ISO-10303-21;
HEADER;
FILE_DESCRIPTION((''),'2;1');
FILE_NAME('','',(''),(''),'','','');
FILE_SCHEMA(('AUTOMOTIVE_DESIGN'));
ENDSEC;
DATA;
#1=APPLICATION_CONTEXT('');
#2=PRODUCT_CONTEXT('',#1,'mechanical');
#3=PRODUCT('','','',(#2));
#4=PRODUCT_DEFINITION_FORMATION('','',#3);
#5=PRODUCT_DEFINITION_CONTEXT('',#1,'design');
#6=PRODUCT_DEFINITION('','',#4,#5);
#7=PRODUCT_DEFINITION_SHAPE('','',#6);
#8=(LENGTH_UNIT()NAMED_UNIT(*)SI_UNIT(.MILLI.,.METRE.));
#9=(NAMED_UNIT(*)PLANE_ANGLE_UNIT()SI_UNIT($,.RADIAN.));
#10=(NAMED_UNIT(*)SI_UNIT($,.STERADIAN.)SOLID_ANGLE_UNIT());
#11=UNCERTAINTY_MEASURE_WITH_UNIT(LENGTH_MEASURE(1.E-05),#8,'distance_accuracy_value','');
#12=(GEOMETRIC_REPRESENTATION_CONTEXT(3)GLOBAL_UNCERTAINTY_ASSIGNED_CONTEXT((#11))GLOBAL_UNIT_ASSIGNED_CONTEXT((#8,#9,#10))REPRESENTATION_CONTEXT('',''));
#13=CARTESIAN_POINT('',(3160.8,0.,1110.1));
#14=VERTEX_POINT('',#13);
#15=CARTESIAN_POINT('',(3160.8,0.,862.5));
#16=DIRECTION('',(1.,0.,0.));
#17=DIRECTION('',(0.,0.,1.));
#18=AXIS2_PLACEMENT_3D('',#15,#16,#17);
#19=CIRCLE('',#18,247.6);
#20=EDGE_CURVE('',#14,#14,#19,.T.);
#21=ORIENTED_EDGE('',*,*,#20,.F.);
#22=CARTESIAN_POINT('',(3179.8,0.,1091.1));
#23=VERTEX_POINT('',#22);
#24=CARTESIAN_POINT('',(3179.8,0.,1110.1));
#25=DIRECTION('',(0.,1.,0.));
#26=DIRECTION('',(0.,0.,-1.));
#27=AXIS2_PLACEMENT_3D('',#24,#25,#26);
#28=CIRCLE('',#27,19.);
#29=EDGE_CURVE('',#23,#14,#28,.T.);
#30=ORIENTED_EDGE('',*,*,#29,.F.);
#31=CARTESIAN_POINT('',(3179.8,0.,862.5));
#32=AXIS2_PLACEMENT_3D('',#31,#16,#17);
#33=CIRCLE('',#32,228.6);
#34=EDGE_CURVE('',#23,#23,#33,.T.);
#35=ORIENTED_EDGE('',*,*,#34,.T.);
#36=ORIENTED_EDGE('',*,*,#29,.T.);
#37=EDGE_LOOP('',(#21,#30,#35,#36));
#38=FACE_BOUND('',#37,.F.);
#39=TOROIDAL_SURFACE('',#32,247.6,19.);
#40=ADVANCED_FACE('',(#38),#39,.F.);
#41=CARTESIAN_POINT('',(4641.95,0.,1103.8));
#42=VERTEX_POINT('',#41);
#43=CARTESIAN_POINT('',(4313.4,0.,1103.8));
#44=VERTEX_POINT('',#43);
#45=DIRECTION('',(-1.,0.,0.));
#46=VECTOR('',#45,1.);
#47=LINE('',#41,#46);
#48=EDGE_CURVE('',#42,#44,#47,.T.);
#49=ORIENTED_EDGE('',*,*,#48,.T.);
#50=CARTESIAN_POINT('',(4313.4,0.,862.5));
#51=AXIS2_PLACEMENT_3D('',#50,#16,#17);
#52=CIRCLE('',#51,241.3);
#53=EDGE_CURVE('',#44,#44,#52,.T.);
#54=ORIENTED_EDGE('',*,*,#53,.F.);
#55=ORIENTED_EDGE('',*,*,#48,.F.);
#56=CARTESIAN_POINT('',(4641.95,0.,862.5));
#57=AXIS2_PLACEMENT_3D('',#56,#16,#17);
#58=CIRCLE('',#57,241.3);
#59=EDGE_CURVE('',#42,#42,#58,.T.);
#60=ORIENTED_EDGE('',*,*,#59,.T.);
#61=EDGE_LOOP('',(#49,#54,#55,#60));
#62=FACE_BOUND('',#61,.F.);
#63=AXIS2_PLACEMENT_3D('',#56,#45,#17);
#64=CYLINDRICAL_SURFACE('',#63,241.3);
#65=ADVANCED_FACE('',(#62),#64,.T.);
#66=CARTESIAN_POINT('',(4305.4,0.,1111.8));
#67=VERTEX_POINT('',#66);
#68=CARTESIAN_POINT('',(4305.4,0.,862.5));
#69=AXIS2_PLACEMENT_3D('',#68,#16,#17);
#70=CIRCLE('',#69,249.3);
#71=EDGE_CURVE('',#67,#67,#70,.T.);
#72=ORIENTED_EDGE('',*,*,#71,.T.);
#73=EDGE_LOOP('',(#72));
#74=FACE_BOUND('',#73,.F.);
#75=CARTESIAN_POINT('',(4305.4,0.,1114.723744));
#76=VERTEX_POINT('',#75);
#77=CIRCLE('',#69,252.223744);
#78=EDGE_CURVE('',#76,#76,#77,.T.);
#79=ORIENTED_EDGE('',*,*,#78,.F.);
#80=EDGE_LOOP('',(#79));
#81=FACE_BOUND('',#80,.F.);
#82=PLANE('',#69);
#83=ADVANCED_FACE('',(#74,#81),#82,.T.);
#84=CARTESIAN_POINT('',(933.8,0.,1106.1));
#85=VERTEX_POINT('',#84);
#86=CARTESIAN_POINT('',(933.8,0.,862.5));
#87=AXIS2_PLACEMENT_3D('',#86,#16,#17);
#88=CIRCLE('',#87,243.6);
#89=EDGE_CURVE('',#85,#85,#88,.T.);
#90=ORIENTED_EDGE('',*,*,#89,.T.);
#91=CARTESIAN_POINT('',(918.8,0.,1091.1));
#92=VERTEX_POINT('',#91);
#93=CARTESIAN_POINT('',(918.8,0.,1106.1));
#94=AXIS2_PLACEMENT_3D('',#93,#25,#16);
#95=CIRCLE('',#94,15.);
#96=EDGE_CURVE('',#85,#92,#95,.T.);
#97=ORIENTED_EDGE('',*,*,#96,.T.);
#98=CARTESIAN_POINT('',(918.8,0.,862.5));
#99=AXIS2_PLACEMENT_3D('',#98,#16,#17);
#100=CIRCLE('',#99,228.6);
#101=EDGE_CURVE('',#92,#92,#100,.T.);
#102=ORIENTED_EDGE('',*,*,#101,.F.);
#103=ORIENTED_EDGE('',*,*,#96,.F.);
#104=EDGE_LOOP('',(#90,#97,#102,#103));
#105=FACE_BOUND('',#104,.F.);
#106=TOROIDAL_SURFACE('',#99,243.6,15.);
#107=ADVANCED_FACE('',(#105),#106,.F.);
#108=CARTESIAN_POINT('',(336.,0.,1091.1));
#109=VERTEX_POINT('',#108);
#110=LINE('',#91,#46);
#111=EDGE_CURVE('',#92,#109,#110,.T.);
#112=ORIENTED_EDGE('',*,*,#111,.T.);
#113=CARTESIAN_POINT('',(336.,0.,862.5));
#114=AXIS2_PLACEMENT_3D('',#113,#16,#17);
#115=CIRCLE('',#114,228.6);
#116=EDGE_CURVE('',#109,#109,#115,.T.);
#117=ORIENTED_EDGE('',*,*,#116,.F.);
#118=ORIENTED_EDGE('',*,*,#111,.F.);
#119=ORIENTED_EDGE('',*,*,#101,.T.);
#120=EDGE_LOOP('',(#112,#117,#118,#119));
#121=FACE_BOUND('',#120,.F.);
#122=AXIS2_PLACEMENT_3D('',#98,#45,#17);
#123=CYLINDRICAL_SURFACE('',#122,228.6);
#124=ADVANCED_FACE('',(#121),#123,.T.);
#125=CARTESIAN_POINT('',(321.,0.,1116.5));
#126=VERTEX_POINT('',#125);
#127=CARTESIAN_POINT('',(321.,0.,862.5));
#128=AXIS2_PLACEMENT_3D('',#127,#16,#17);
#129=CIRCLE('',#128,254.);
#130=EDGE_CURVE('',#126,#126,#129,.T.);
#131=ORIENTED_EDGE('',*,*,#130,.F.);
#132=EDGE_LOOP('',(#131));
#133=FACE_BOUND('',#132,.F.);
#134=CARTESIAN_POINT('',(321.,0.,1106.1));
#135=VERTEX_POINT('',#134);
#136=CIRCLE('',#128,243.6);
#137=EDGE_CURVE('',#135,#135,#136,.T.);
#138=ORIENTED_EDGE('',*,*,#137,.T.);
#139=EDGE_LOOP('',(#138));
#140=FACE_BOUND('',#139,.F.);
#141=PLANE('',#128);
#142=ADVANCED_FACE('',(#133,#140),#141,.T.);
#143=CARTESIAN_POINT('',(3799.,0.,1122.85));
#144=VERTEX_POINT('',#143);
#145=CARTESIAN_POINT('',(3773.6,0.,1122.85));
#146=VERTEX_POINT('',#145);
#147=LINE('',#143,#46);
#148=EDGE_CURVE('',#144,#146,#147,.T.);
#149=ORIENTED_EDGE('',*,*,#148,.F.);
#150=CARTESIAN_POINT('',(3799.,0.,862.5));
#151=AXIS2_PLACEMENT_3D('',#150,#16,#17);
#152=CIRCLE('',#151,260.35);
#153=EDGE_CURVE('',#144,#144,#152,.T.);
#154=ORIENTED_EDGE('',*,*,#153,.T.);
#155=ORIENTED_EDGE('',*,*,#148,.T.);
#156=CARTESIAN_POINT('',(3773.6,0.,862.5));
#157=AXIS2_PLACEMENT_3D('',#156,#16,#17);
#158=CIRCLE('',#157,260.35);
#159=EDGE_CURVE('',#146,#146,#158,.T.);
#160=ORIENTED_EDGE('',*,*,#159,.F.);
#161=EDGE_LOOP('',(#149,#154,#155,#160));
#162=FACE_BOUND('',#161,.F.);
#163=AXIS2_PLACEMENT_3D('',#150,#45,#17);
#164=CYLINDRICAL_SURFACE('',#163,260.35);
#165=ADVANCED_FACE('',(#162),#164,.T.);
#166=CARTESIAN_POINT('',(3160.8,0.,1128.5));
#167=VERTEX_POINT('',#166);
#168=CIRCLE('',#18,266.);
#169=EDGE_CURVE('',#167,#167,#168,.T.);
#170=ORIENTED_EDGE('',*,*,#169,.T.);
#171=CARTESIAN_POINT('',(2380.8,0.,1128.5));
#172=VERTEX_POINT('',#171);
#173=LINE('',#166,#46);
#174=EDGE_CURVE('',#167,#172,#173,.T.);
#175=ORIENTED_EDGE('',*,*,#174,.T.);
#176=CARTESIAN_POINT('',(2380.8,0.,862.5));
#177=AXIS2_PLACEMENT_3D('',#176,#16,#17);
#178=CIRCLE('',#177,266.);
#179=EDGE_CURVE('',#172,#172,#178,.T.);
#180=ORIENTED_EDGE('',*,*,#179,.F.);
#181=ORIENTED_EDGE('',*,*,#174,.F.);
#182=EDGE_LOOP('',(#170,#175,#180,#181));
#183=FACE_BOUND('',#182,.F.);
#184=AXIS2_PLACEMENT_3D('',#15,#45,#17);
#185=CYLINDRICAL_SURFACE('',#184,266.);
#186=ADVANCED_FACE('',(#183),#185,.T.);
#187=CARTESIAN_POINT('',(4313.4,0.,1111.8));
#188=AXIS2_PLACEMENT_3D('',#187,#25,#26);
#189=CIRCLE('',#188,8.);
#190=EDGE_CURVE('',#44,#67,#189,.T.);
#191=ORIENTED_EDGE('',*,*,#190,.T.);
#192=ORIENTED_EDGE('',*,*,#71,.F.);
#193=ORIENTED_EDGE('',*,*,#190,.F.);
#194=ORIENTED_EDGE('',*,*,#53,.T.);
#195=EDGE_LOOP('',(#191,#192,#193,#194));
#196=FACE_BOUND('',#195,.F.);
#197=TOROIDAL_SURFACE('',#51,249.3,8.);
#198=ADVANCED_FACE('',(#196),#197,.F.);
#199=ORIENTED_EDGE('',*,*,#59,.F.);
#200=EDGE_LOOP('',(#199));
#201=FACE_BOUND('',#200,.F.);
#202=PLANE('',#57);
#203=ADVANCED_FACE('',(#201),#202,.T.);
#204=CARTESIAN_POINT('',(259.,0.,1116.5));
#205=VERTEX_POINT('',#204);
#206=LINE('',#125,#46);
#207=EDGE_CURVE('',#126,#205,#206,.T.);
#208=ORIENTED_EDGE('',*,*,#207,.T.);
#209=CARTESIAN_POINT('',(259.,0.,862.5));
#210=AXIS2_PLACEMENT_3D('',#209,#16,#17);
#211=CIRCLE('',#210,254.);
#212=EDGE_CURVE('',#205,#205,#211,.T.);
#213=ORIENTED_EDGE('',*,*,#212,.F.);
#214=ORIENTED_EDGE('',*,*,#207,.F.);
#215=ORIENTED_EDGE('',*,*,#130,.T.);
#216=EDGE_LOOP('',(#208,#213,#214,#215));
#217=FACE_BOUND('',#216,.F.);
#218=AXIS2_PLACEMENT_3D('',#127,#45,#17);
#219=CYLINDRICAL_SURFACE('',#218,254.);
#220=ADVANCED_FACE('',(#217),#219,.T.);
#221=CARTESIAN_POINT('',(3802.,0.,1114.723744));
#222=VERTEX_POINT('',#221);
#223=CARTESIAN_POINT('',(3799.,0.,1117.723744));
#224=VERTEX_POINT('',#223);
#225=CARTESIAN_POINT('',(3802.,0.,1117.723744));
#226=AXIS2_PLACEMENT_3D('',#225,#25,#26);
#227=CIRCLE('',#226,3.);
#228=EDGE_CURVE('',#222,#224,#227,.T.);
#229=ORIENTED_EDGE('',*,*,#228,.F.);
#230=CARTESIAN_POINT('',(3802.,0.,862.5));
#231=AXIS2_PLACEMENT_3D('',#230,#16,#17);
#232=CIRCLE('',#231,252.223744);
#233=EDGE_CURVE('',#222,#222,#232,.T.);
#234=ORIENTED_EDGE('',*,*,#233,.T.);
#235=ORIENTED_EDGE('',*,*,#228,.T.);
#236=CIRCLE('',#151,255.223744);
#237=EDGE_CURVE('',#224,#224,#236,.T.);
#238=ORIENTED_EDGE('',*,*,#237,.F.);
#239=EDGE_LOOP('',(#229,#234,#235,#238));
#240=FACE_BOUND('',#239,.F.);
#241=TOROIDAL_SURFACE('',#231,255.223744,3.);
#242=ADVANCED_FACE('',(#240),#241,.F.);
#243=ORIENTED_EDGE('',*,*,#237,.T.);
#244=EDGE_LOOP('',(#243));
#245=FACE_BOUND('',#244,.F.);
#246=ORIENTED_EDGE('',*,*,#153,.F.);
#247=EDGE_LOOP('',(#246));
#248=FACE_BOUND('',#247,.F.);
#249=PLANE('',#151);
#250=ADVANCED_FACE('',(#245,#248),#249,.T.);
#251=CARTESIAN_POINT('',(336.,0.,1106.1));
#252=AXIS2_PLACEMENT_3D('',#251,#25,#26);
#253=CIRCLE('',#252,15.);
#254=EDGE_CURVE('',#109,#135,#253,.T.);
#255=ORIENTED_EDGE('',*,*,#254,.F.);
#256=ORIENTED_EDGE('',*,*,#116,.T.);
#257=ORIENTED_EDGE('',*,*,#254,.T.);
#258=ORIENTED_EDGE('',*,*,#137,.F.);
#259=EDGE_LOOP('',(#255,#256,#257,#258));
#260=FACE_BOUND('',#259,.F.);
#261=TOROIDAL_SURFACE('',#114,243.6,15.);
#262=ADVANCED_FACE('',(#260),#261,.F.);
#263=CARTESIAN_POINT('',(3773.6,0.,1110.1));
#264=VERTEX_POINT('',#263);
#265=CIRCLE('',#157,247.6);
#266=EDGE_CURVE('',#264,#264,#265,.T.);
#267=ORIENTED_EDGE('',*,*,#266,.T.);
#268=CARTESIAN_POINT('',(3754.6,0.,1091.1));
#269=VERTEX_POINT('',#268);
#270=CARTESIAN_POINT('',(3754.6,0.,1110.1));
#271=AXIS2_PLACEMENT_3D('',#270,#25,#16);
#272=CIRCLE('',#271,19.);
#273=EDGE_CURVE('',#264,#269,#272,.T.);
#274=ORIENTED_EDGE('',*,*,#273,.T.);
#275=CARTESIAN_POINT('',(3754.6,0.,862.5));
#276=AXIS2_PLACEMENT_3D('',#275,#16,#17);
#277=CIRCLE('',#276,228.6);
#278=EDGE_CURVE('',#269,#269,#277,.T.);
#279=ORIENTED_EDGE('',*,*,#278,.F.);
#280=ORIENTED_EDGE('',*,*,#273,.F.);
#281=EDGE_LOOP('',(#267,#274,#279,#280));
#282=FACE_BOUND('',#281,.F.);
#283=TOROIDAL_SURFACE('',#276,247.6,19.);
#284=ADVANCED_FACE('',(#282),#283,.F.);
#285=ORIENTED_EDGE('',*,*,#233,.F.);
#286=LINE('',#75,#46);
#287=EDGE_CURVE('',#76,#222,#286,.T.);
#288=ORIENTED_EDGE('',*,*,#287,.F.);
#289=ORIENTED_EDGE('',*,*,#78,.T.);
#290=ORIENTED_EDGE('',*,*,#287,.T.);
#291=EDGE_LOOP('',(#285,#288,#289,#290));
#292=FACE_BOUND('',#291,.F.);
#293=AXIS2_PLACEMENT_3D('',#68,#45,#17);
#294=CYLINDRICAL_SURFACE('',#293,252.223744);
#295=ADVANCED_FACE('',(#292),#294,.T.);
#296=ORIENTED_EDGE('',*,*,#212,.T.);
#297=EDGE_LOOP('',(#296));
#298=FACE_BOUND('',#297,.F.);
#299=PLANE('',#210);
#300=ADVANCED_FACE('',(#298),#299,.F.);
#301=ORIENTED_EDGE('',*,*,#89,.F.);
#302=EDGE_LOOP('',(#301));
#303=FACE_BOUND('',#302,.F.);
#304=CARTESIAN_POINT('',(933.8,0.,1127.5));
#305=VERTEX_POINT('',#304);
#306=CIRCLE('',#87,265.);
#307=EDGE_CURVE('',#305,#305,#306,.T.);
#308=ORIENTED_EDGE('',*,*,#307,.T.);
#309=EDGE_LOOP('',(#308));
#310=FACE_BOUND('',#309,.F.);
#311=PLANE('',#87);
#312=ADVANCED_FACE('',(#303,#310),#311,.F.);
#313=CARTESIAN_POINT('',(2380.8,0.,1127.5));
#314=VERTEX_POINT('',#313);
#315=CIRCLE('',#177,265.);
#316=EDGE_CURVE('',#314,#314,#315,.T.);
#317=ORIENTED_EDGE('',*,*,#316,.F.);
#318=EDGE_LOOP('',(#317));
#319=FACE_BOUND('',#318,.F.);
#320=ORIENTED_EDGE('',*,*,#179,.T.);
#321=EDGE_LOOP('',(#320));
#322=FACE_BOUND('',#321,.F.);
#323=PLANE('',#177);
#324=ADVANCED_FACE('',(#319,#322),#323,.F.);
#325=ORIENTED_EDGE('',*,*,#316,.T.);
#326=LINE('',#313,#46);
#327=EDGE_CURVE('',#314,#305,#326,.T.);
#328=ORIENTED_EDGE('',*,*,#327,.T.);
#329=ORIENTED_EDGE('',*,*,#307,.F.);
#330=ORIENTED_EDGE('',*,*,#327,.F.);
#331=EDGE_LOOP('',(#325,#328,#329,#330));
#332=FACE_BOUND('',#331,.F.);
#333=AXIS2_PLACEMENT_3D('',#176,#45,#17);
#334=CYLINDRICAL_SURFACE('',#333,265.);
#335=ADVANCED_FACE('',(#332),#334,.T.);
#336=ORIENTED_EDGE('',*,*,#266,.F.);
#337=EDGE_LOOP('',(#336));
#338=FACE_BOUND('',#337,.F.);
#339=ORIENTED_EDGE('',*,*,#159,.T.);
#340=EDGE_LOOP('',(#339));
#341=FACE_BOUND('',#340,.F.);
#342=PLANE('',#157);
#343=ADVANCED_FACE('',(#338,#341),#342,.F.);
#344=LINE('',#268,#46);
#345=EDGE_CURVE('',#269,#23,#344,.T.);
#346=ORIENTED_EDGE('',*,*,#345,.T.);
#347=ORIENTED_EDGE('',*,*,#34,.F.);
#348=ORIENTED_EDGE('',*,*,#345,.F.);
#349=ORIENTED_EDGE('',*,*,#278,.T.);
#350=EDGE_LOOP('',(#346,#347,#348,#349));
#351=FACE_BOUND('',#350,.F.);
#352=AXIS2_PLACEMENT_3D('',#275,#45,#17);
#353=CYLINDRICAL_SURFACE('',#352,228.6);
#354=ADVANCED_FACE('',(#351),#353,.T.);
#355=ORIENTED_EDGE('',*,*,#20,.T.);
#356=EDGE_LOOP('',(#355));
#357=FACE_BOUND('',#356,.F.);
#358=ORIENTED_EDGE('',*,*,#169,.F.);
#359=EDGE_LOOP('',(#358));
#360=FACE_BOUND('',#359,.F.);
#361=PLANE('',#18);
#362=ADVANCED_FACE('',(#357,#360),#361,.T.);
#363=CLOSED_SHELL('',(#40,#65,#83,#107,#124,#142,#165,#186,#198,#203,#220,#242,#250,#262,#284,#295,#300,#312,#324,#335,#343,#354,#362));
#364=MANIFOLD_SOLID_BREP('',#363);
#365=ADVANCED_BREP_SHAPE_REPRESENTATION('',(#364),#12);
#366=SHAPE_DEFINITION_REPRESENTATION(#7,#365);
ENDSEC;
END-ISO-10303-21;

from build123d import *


# Not quite as in the source:
# - a feature names something its author has since deleted; it is built from what else it names


with BuildPart() as f1:
    # F0 (on Front) → F1 (revolve)
    with BuildSketch(Plane.XZ):
        Polygon((259, 254), (259, 0), (321, 0), (321, 243.6), (321, 254), align=None)
        Polygon((933.8, 243.6), (933.8, 0), (2380.8, 0), (2380.8, 261), (2380.8, 265), (933.8, 265), align=None)
        Polygon((2380.8, 261), (2380.8, 0), (3160.8, 0), (3160.8, 247.6), (3160.8, 266), (2380.8, 266), (2380.8, 265), align=None)
        with BuildLine():
            Line((3160.8, 247.6), (3160.8, 0))
            Line((3160.8, 0), (3773.6, 0))
            Line((3773.6, 0), (3773.6, 247.6))
            ThreePointArc((3773.6, 247.6), (3768.0350288425, 234.1649711575), (3754.6, 228.6))
            Line((3754.6, 228.6), (3179.8, 228.6))
            ThreePointArc((3179.8, 228.6), (3166.3649711575, 234.1649711575), (3160.8, 247.6))
        make_face()
        with BuildLine():
            Line((3799, 255.2237437367), (3799, 0))
            Line((3799, 0), (4305.4, 0))
            Line((4305.4, 0), (4305.4, 249.3))
            Line((4305.4, 249.3), (4305.4, 252.2237437367))
            Line((4305.4, 252.2237437367), (3802, 252.2237437367))
            ThreePointArc((3802, 252.2237437367), (3799.8786796564, 253.1024233932), (3799, 255.2237437367))
        make_face()
        Polygon((3773.6, 247.6), (3773.6, 0), (3799, 0), (3799, 255.2237437367), (3799, 260.35), (3773.6, 260.35), align=None)
        with BuildLine():
            Line((4305.4, 249.3), (4305.4, 0))
            Line((4305.4, 0), (4641.95, 0))
            Line((4641.95, 0), (4641.95, 241.3))
            Line((4641.95, 241.3), (4313.4, 241.3))
            ThreePointArc((4313.4, 241.3), (4307.7431457505, 243.6431457505), (4305.4, 249.3))
        make_face()
        with BuildLine():
            Line((321, 243.6), (321, 0))
            Line((321, 0), (933.8, 0))
            Line((933.8, 0), (933.8, 243.6))
            ThreePointArc((933.8, 243.6), (929.4066017178, 232.9933982822), (918.8, 228.6))
            Line((918.8, 228.6), (336, 228.6))
            ThreePointArc((336, 228.6), (325.3933982822, 232.9933982822), (321, 243.6))
        make_face()
    revolve(axis=Axis((23207.5, 0, 0), (1, 0, 0)))


with BuildPart() as f1_1:
    # F2: moved
    add(f1.part.moved(Location((0, 0, 862.5))))


solid = f1_1.part
